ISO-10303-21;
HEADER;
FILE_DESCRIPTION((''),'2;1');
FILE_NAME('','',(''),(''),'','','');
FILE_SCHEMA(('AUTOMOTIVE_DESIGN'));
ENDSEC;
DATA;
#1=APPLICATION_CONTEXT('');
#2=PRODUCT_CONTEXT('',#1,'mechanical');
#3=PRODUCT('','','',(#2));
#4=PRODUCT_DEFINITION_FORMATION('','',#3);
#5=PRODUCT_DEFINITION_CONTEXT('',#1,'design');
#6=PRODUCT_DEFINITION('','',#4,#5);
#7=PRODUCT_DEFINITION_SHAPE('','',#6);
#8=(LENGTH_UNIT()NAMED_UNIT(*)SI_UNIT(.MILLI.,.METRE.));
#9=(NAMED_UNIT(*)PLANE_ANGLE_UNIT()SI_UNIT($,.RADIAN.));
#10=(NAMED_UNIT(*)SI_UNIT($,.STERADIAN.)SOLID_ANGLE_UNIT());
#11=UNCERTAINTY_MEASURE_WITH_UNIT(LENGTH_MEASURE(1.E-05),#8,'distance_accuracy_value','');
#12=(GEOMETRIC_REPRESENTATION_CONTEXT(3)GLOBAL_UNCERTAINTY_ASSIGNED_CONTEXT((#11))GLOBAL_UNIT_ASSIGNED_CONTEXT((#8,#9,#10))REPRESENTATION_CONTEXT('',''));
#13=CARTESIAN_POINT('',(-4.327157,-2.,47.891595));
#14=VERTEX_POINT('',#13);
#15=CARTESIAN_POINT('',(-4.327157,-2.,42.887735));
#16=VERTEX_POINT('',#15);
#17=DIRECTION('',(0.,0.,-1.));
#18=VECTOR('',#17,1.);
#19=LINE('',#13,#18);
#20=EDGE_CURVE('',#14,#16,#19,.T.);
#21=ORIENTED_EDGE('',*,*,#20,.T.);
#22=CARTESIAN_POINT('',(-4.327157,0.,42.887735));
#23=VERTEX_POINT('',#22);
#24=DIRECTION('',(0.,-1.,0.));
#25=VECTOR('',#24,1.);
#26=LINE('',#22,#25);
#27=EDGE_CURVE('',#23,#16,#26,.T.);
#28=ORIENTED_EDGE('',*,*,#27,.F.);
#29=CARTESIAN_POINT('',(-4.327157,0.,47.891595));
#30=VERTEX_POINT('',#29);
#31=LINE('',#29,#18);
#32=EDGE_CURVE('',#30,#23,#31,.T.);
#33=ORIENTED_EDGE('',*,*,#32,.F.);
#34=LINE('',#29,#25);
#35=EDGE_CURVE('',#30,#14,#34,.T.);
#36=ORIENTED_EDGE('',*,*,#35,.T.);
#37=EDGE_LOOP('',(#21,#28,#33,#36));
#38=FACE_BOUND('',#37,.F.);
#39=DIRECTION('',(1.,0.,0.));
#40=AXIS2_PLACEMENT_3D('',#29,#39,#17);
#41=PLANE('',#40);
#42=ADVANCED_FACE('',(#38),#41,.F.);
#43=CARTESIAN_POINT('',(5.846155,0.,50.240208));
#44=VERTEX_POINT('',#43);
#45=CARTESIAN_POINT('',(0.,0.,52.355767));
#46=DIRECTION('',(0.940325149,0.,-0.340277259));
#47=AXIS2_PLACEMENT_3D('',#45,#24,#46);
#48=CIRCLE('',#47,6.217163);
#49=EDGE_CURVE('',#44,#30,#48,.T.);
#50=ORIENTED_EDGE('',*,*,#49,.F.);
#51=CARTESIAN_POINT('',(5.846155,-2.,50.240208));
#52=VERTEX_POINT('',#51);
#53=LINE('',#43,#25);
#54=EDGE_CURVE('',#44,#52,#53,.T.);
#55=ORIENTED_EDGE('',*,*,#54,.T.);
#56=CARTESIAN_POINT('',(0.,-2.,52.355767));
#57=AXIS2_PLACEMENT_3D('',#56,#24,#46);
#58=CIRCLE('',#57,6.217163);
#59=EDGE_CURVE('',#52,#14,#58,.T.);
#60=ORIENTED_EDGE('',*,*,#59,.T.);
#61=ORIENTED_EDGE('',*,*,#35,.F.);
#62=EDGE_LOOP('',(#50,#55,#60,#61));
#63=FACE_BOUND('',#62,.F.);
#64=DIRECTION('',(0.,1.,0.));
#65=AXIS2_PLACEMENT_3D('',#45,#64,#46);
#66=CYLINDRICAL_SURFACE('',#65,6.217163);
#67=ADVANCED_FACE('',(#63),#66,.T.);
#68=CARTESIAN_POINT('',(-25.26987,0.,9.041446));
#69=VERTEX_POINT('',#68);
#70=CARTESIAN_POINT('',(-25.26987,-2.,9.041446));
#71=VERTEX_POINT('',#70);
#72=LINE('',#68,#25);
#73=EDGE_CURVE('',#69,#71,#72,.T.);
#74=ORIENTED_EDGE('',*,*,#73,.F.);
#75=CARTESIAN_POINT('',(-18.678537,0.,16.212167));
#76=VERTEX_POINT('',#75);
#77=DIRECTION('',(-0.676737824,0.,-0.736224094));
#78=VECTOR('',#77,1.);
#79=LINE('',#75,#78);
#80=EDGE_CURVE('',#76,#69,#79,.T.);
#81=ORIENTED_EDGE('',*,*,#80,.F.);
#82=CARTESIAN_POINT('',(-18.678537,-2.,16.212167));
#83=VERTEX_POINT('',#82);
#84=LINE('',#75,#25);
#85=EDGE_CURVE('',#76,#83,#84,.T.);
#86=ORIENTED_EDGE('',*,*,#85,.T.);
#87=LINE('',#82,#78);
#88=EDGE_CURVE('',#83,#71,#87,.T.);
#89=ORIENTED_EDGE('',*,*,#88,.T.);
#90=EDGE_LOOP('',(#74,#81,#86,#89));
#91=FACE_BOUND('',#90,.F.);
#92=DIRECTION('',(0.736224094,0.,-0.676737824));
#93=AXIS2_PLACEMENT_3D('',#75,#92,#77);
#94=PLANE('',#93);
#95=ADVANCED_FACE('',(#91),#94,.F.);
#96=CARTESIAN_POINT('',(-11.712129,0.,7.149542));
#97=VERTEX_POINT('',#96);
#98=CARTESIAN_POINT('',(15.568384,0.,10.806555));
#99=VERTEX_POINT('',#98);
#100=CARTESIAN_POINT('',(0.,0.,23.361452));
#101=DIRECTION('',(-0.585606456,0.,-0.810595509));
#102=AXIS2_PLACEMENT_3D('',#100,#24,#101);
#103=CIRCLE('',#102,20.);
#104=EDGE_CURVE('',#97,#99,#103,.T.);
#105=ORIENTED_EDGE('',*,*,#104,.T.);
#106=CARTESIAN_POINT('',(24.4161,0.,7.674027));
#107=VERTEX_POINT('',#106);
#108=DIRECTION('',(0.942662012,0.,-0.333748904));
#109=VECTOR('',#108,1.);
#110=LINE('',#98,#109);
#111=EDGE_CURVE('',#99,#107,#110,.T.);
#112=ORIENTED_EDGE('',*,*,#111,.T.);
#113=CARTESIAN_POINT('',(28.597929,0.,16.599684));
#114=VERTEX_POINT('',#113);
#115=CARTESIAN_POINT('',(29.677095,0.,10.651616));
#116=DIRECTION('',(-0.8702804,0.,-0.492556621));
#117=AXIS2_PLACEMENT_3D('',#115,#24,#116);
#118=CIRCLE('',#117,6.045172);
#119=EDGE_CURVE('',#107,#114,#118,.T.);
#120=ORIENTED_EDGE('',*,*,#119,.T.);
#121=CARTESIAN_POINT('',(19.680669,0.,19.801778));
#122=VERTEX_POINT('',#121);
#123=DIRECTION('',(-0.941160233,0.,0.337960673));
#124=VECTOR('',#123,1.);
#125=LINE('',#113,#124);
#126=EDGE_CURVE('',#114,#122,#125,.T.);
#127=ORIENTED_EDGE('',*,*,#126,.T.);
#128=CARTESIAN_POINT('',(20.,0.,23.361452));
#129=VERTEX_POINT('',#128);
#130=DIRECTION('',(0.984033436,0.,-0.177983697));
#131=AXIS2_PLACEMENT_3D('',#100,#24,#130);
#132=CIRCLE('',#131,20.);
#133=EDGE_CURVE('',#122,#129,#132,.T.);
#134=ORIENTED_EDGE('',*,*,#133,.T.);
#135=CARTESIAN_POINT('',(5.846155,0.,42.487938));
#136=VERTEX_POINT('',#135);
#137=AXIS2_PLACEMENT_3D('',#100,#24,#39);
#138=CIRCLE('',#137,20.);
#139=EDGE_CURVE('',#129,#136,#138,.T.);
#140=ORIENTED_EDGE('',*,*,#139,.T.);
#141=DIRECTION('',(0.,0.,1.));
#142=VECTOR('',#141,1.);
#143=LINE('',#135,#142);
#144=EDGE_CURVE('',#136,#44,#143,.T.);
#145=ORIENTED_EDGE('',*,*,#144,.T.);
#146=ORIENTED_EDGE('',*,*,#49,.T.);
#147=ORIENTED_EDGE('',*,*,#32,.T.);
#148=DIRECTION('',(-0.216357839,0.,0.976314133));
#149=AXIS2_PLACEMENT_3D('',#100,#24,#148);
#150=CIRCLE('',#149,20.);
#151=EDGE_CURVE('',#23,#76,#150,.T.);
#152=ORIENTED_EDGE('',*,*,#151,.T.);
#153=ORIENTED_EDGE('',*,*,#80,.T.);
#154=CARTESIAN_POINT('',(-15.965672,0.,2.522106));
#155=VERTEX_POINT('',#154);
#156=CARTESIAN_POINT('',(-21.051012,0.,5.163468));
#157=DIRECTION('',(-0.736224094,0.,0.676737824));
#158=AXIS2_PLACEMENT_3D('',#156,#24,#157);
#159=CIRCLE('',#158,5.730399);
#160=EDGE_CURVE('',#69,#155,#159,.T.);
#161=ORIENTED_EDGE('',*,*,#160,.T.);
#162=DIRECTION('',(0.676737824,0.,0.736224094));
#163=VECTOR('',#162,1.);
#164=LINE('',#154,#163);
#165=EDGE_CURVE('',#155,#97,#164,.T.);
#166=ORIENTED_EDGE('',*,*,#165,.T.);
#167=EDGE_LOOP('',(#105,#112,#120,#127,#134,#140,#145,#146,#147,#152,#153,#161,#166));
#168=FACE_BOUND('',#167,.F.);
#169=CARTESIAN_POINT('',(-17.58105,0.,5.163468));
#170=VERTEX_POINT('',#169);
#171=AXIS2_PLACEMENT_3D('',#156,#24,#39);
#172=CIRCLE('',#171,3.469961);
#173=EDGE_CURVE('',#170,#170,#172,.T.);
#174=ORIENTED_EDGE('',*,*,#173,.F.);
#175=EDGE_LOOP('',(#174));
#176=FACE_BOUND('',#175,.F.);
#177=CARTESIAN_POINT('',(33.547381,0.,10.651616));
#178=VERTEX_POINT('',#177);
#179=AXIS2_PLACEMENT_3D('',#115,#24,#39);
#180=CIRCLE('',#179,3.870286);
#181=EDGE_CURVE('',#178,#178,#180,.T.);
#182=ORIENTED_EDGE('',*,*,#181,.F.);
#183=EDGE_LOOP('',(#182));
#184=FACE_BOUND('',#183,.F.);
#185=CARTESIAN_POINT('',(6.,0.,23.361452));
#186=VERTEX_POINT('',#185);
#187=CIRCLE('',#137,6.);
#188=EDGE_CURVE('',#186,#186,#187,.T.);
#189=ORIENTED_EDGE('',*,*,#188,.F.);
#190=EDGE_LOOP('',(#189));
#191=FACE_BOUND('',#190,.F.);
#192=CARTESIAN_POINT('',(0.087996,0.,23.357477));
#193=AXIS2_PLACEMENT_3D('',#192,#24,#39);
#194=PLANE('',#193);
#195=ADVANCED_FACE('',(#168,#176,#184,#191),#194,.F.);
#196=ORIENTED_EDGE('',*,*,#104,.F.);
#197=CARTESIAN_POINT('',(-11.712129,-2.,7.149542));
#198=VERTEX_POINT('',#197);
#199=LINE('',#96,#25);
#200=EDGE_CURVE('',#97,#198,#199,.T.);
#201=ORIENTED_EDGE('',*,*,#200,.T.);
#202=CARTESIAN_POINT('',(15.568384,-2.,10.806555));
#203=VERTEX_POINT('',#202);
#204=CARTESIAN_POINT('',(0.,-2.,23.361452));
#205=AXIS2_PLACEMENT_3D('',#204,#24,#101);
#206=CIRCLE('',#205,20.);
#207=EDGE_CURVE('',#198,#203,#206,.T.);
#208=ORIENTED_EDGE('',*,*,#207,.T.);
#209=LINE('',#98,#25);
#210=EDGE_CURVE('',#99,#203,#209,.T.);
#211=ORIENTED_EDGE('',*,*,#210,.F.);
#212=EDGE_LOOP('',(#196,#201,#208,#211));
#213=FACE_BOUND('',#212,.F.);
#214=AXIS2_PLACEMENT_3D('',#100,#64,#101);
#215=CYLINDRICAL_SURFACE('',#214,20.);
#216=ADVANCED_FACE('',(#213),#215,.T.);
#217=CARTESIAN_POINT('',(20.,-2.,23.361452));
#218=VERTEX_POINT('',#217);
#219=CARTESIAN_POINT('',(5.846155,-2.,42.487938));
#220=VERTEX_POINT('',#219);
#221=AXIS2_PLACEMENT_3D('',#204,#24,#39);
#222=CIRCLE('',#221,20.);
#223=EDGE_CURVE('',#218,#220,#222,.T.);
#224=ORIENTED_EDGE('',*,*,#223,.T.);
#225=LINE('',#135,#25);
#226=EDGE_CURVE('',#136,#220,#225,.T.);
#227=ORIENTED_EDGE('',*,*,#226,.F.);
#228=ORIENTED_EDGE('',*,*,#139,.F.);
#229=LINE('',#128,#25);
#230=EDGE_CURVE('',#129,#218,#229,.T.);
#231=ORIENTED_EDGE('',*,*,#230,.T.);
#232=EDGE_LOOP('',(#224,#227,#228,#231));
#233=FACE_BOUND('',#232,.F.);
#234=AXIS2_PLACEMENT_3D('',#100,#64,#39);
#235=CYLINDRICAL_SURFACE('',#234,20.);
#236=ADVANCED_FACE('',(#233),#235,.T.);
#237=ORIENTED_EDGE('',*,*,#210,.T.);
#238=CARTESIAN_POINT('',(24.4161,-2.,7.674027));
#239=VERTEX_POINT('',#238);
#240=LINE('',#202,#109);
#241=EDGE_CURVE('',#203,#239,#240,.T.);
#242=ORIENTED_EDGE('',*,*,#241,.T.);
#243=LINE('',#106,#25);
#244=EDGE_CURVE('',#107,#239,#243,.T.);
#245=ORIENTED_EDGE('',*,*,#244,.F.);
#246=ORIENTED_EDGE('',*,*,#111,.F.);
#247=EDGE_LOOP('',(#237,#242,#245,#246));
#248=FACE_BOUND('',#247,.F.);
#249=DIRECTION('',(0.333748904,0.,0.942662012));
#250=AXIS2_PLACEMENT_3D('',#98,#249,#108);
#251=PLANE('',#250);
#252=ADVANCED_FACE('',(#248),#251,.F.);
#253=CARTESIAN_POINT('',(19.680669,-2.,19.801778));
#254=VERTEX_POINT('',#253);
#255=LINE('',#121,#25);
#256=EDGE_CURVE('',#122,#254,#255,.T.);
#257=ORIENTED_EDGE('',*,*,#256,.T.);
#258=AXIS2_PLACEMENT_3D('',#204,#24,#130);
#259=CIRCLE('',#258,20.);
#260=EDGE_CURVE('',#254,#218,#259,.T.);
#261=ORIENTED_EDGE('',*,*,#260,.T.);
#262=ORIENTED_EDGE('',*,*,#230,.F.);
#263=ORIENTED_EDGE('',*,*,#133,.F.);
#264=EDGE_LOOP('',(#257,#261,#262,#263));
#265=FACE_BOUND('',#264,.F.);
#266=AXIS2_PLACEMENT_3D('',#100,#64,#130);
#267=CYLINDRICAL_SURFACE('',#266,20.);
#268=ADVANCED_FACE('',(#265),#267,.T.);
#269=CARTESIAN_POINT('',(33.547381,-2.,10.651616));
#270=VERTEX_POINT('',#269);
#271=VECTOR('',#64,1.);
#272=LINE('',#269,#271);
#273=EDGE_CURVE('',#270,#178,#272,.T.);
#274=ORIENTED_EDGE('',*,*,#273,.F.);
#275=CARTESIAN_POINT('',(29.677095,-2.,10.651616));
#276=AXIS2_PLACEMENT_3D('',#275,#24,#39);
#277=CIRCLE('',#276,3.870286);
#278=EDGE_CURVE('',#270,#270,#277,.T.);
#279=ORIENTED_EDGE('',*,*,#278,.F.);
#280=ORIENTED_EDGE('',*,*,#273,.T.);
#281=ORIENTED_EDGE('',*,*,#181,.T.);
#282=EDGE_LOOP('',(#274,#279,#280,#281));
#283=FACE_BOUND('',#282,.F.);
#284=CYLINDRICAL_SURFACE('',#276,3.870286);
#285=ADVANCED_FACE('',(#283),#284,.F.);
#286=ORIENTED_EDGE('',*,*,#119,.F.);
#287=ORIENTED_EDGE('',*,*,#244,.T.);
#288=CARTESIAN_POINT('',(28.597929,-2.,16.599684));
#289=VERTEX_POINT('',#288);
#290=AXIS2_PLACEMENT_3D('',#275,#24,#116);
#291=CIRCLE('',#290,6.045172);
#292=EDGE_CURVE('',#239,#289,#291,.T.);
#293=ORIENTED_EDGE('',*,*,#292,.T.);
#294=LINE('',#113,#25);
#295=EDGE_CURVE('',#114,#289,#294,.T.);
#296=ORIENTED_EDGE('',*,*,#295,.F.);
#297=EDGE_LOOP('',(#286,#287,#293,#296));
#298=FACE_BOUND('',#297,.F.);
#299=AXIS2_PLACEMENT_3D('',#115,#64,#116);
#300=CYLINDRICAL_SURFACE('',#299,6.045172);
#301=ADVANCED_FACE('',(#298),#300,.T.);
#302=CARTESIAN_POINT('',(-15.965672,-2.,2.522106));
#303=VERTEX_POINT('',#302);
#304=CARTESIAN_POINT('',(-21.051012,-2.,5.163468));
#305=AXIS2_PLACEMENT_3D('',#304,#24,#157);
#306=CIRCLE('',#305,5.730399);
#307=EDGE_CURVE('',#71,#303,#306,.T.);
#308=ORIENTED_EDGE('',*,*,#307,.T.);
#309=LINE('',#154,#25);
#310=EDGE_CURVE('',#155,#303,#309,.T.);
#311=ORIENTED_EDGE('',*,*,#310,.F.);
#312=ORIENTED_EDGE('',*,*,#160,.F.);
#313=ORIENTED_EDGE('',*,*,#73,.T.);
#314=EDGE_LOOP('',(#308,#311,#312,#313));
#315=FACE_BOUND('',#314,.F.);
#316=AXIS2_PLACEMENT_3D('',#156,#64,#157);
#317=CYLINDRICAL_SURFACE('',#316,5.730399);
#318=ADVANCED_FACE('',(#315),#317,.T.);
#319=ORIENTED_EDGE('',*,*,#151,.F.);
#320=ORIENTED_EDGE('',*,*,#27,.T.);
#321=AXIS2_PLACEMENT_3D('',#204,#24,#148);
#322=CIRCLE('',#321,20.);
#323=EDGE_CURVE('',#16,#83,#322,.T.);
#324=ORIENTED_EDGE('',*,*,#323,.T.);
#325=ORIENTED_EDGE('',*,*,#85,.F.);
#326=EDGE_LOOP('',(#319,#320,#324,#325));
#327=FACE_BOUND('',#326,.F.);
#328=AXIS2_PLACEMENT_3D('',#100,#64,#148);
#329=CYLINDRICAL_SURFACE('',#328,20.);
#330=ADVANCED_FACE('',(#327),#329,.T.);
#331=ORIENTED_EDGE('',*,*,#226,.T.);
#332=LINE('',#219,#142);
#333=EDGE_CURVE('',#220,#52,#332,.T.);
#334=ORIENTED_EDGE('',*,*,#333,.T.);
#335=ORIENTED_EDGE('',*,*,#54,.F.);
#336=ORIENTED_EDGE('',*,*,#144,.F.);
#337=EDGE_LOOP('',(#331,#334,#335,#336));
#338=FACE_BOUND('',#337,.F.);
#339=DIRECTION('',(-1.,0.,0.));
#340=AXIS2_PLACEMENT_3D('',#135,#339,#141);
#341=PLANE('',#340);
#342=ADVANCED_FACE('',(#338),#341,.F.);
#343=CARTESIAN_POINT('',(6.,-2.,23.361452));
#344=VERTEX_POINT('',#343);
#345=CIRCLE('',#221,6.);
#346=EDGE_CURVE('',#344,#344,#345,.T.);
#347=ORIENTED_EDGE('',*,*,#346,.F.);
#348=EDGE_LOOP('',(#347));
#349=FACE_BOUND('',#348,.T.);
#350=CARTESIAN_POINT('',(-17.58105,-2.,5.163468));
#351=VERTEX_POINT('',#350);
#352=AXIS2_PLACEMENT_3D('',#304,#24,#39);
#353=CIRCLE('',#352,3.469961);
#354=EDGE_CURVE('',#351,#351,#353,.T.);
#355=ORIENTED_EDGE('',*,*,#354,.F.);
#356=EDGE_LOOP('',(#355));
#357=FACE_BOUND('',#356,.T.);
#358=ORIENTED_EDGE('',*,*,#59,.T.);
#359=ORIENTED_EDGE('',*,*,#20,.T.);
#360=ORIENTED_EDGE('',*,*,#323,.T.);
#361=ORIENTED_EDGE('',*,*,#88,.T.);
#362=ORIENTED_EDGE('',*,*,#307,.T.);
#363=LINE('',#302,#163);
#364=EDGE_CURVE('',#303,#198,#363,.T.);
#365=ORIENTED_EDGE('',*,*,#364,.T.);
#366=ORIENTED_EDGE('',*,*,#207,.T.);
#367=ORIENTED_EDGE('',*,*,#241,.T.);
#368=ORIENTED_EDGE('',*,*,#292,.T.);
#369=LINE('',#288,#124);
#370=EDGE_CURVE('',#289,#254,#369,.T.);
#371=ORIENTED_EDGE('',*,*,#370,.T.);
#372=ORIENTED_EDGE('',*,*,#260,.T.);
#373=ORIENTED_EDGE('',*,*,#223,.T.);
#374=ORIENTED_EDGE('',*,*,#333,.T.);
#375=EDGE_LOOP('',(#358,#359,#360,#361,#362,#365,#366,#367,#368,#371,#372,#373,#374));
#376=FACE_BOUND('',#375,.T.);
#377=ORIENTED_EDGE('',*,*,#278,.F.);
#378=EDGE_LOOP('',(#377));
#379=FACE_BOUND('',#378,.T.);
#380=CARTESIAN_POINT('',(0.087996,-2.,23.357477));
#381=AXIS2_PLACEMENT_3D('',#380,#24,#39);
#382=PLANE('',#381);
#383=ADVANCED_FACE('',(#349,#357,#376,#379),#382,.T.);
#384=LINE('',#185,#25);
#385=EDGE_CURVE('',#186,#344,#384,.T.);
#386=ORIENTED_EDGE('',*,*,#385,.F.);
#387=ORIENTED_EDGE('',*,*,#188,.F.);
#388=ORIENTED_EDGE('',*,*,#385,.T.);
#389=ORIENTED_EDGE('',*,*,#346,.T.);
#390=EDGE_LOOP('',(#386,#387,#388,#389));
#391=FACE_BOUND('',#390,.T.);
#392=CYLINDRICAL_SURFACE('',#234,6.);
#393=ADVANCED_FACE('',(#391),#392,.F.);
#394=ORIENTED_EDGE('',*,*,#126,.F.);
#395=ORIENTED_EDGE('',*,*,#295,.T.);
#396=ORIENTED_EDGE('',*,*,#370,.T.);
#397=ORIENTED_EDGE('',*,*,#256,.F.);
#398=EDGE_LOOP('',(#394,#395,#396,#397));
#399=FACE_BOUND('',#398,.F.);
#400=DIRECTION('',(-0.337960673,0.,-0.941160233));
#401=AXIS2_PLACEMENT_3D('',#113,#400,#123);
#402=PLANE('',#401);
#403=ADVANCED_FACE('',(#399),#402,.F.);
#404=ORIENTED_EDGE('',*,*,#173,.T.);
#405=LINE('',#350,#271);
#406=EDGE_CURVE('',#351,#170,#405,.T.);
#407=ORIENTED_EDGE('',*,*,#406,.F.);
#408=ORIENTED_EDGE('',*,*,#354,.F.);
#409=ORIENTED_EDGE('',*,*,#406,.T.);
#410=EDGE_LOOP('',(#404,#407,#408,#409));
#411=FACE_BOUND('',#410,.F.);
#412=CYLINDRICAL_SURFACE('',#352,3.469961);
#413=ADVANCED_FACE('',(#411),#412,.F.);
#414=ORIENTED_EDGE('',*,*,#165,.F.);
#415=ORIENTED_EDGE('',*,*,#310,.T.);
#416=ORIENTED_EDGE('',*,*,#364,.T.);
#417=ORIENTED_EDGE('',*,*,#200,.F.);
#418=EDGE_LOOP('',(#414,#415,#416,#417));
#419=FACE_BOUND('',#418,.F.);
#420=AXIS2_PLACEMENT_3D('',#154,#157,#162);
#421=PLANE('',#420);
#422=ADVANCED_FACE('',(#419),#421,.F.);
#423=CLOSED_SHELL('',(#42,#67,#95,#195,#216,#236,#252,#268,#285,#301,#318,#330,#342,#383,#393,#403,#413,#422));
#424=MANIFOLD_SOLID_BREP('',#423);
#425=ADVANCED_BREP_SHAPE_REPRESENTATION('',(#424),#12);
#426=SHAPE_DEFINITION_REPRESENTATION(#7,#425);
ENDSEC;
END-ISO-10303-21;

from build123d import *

# Parameters (mm, degrees)
F0_R     = 6
F3_DEPTH = 2
F4_R     = 2.937220037
F4_R_2   = 2.9600798579
F4_R_3   = 3.1369542822
F5_DEPTH = 25
F6_R     = 3.870285665
F6_R_2   = 3.4699614842
F7_DEPTH = 3


# Not quite as in the source:
# - the program builds the solid bodies; features that only make, move or delete a surface that nothing else refers to are left out


with BuildPart() as f3:
    # F0 (on Front) → F3 (new body)
    with BuildSketch(Plane.XZ):
        with BuildLine():
            ThreePointArc((19.6806687258, 19.8017779916), (19.9200072103, 21.5744676649), (20, 23.3614519238))
            ThreePointArc((20, 23.3614519238), (16.0767393697, 35.2584452936), (5.8461548761, 42.4879380926))
            ThreePointArc((5.8461548761, 42.4879380926), (0.7853649586, 43.3460260219), (-4.327156771, 42.8877345777))
            ThreePointArc((-4.327156771, 42.8877345777), (-17.6128349493, 32.8371073128), (-18.6785365647, 16.2121672183))
            ThreePointArc((-18.6785365647, 16.2121672183), (-15.8565738824, 11.1725608869), (-11.7121291204, 7.1495417506))
            ThreePointArc((-11.7121291204, 7.1495417506), (2.6572751847, 3.5387657135), (15.5683835849, 10.8065551679))
            ThreePointArc((15.5683835849, 10.8065551679), (18.189349373, 15.0459501719), (19.6806687258, 19.8017779916))
        make_face()
        with Locations((0, 23.3614519238)):
            Circle(F0_R, mode=Mode.SUBTRACT)
        with BuildLine():
            ThreePointArc((-4.327156771, 42.8877345777), (0.7853649586, 43.3460260219), (5.8461548761, 42.4879380926))
            Line((5.8461548761, 42.4879380926), (5.8461548761, 50.2402076719))
            ThreePointArc((5.8461548761, 50.2402076719), (-1.3985114704, 58.4135951865), (-4.327156771, 47.891594871))
            Line((-4.327156771, 47.891594871), (-4.327156771, 42.8877345777))
        make_face()
        with BuildLine():
            Line((28.5979291758, 16.5996841985), (19.6806687258, 19.8017779916))
            ThreePointArc((19.6806687258, 19.8017779916), (18.189349373, 15.0459501719), (15.5683835849, 10.8065551679))
            Line((15.5683835849, 10.8065551679), (24.4160998295, 7.6740266873))
            ThreePointArc((24.4160998295, 7.6740266873), (35.1512386763, 8.0868826224), (28.5979291758, 16.5996841985))
        make_face()
        with BuildLine():
            ThreePointArc((-11.7121291204, 7.1495417506), (-15.8565738824, 11.1725608869), (-18.6785365647, 16.2121672183))
            Line((-18.6785365647, 16.2121672183), (-25.2698698947, 9.0414457989))
            ThreePointArc((-25.2698698947, 9.0414457989), (-24.3393468403, 0.4704595262), (-15.965672237, 2.5221058119))
            Line((-15.965672237, 2.5221058119), (-11.7121291204, 7.1495417506))
        make_face()
    extrude(amount=F3_DEPTH)

    # F4 (on Front) → F5 (cut)
    with BuildSketch(Plane.XZ):
        with Locations((0, 53.6376424134)):
            Circle(F4_R)
        with Locations((29.5011680573, 10.3136152029)):
            Circle(F4_R_2)
        with Locations((-20.7987613976, 4.8063262366)):
            Circle(F4_R_3)
    extrude(amount=-F5_DEPTH, mode=Mode.SUBTRACT)

    # F6 (on face) → F7 (cut)
    with BuildSketch(Plane.XZ.offset(2)):
        with Locations((29.6770948917, 10.6516163796)):
            Circle(F6_R)
        with Locations((-21.0510119796, 5.1634679548)):
            Circle(F6_R_2)
    extrude(amount=-F7_DEPTH, mode=Mode.SUBTRACT)


solid = f3.part
